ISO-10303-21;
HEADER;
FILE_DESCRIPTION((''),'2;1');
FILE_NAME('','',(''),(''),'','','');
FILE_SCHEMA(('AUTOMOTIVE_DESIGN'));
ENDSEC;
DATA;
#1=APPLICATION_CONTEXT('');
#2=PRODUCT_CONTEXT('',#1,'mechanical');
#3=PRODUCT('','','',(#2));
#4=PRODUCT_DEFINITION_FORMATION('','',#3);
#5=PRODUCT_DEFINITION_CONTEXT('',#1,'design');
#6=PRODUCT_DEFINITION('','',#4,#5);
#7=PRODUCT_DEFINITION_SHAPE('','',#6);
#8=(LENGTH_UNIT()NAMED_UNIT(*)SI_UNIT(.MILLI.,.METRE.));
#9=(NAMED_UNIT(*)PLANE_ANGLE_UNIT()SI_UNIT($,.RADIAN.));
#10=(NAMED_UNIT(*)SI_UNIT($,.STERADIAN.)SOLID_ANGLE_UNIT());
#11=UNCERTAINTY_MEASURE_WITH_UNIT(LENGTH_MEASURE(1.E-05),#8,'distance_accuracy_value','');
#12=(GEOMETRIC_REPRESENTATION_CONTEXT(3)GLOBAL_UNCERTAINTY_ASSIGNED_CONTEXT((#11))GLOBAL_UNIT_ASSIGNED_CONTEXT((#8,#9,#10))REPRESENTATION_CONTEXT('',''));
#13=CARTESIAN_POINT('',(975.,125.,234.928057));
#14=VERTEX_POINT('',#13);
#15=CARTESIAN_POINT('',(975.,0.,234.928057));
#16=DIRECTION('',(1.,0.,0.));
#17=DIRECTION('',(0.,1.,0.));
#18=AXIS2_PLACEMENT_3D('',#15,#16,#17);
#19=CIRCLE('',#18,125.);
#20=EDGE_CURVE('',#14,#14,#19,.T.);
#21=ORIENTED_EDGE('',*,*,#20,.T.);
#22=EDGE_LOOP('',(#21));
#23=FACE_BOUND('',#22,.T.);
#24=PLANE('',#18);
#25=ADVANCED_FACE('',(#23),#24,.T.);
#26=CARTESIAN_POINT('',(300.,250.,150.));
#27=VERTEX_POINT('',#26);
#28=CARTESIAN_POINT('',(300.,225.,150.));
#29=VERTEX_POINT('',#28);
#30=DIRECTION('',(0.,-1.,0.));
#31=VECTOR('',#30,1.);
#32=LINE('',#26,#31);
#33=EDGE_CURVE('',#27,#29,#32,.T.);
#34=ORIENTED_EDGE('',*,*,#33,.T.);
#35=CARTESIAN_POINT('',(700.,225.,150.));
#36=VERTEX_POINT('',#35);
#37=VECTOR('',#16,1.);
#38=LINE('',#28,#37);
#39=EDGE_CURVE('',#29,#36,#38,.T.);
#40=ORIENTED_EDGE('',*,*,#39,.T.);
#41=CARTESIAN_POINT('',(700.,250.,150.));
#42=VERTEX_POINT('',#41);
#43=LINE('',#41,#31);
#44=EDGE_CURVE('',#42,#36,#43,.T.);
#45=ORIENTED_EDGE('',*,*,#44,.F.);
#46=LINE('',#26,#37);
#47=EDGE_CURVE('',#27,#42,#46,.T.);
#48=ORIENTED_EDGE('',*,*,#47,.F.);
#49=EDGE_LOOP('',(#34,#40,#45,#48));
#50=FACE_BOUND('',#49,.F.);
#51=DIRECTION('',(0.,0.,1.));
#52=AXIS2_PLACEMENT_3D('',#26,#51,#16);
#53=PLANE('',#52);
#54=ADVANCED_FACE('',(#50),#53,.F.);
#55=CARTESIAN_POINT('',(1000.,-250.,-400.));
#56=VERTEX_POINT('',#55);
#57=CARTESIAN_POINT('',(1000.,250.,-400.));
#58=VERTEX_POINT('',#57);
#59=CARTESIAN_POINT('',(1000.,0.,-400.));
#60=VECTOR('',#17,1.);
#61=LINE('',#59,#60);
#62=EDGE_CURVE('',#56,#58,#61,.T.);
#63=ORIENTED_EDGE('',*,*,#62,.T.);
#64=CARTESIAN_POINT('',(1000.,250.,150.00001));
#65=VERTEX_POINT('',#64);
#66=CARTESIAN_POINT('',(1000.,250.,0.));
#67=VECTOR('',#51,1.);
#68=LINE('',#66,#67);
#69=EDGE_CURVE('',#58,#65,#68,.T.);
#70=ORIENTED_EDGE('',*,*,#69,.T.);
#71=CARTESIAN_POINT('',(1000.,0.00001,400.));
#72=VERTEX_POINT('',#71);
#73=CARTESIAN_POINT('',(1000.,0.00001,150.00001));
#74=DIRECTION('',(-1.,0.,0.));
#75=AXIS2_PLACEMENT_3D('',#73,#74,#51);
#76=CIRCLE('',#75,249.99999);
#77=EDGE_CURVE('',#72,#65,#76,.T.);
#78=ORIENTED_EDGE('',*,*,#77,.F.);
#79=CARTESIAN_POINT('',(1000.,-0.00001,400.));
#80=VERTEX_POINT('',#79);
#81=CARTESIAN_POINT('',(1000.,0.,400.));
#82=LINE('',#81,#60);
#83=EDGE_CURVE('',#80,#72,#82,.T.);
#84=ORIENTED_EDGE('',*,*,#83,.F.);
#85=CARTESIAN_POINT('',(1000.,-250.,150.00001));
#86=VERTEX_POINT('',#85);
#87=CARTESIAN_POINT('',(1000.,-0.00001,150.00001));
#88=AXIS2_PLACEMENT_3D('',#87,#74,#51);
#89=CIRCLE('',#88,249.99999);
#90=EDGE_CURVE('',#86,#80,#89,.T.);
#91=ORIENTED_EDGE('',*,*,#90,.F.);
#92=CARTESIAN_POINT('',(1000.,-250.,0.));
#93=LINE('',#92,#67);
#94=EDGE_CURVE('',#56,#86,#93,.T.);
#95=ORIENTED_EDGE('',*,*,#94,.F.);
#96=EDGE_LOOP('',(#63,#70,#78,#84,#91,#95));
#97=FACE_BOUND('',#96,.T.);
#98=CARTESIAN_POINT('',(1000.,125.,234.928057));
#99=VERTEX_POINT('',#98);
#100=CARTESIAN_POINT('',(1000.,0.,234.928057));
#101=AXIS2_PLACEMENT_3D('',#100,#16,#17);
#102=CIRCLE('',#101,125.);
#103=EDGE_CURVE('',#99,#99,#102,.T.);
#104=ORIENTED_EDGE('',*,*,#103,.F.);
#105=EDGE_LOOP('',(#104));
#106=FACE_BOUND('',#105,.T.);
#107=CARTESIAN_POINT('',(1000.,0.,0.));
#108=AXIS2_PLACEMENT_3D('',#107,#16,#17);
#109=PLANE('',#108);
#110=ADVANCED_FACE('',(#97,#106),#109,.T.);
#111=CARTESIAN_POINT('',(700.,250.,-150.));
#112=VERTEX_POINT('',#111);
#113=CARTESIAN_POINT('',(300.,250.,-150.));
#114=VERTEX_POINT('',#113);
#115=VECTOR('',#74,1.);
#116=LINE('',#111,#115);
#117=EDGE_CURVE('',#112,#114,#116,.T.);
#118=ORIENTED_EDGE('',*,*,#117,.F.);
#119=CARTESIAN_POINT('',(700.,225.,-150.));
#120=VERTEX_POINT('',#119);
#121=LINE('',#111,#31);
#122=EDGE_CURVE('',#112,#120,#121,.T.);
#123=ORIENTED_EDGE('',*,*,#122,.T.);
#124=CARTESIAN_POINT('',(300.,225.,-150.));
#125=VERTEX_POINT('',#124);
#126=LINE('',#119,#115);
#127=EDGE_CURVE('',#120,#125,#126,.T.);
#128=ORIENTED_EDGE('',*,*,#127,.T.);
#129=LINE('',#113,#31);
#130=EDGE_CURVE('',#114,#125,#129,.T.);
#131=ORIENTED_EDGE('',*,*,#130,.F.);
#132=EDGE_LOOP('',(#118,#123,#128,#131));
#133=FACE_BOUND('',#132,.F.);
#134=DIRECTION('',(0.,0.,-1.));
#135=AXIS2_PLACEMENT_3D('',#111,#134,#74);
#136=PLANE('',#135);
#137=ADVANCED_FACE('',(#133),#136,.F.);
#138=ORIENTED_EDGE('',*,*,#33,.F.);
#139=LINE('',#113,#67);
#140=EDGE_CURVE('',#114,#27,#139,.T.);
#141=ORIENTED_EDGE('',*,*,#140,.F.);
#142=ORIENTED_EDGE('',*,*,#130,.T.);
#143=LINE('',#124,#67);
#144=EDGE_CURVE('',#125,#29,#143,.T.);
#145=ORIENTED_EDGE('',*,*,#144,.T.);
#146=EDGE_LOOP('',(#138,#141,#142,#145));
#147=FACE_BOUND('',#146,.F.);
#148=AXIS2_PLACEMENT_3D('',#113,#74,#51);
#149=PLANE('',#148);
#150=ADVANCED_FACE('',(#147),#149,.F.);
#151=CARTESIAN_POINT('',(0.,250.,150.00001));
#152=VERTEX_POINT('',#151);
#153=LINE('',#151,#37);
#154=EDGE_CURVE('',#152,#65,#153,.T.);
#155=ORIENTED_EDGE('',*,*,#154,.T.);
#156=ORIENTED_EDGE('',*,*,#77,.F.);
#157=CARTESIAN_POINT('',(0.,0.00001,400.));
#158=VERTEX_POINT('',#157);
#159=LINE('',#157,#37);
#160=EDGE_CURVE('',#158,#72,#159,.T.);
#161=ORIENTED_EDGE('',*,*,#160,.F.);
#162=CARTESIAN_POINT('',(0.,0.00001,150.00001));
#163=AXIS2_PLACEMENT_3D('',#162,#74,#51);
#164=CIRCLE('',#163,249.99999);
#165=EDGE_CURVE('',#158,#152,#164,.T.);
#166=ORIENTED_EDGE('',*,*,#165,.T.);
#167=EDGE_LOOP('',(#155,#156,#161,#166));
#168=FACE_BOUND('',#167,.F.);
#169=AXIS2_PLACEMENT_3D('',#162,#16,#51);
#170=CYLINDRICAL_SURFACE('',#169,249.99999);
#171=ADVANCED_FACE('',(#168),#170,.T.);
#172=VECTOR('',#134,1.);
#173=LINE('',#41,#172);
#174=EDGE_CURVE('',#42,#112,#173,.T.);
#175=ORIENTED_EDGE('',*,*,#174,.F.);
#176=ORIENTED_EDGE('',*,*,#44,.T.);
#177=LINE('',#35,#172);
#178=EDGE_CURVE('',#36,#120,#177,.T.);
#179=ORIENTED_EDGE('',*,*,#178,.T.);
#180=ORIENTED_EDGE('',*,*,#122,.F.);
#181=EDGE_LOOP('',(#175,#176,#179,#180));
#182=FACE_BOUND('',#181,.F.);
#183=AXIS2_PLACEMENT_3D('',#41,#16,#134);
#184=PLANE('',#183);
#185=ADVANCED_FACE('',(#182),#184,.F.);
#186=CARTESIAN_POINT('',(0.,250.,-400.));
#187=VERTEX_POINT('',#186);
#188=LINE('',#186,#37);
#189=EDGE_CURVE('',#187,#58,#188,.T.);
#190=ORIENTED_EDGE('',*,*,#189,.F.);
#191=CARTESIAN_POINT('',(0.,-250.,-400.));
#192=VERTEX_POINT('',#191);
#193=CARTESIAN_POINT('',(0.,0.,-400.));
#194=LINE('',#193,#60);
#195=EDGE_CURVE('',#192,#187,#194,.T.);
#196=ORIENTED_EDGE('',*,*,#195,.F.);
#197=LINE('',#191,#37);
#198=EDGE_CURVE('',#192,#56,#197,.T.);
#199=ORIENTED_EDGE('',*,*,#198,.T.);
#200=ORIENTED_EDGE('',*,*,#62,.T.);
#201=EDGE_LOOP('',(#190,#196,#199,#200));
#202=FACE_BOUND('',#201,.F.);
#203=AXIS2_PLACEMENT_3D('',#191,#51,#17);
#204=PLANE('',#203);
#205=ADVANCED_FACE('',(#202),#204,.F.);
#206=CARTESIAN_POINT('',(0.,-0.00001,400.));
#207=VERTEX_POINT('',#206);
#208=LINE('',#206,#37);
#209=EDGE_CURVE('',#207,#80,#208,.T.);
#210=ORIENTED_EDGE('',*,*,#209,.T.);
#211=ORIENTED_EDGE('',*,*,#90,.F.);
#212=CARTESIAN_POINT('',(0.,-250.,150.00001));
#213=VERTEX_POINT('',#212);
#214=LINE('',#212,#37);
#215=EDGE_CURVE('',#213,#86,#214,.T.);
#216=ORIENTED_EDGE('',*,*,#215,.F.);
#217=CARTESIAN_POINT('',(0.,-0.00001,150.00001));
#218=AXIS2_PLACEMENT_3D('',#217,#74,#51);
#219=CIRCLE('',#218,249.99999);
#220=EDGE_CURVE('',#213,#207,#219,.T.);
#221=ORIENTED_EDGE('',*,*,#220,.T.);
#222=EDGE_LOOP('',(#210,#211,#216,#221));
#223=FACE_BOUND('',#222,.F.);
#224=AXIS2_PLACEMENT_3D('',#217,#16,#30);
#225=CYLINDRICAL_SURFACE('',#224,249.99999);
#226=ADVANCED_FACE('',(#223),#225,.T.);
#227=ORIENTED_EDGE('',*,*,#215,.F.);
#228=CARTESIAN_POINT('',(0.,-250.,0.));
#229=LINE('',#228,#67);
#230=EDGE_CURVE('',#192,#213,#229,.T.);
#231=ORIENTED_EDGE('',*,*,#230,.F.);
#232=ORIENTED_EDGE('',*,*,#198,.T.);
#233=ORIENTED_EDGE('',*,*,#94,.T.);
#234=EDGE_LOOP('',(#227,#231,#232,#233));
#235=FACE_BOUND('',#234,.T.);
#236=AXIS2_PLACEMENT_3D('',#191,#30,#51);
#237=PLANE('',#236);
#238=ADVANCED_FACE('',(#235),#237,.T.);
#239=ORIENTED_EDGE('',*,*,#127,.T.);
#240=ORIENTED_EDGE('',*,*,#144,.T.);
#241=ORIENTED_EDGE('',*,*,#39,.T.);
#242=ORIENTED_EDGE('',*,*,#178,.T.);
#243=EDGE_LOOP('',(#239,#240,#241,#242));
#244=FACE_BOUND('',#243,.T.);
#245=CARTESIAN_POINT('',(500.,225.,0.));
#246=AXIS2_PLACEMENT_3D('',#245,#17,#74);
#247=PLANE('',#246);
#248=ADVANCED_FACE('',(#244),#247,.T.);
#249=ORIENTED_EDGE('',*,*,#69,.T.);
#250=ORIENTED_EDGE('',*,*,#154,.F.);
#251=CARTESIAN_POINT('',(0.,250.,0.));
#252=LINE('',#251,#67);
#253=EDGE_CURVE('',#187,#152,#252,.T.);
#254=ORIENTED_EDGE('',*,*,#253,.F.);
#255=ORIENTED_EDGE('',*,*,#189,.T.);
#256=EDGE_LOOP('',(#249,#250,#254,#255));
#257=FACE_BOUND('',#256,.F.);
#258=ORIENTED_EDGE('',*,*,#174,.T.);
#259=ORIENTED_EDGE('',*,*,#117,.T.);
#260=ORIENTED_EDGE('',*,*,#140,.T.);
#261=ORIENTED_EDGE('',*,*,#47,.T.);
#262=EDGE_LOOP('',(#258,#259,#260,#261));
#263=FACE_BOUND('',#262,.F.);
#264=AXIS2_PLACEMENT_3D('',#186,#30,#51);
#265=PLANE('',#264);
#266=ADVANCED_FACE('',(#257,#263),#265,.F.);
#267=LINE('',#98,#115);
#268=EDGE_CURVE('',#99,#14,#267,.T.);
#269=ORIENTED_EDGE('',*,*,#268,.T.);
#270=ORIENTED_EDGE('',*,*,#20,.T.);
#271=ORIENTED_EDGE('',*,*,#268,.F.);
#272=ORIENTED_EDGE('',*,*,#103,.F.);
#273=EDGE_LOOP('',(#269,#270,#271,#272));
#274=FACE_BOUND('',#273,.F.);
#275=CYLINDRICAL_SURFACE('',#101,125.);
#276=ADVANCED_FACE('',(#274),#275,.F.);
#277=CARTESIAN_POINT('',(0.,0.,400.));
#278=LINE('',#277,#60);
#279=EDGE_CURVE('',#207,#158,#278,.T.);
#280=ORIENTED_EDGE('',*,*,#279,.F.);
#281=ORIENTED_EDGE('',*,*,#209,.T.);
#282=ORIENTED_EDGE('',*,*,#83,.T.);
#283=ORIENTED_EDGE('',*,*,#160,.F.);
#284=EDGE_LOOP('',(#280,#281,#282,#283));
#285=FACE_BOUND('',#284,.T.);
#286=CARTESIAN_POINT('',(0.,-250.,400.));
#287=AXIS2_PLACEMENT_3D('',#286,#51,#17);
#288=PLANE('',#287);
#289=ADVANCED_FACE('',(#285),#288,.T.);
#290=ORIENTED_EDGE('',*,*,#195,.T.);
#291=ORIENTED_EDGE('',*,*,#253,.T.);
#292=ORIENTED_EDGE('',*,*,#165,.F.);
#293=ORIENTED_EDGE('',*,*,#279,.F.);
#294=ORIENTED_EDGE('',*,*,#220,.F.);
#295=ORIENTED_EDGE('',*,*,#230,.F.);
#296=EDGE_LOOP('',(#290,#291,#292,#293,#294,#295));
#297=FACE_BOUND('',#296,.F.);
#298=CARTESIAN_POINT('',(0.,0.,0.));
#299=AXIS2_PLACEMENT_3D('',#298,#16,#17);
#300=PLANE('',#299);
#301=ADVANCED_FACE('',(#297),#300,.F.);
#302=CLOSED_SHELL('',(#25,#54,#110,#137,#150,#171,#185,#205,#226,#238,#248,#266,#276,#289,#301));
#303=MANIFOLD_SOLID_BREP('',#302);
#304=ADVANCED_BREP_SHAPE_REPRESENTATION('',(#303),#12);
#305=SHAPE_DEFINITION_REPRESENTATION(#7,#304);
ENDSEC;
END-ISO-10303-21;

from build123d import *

# Parameters (mm, degrees)
F0_W     = 500
F0_H     = 800
F1_DEPTH = 1000
F2_R     = 125
F3_DEPTH = 25
F4_R     = 249.99999
F6_DEPTH = 25
F7_W     = 600
F7_H     = 8.0311238766
F8_DEPTH = 100


# Not quite as in the source:
# - a fillet or chamfer is up to 0.001 mm smaller than in the source, because OpenCascade refuses the exact size


with BuildPart() as f1:
    # F0 (on Right) → F1 (new body)
    with BuildSketch(Plane.YZ):
        Rectangle(F0_W, F0_H)
    extrude(amount=F1_DEPTH)

    # F2 (on face) → F3 (cut)
    with BuildSketch(Plane.YZ.offset(1000)):
        with Locations((0, 234.9280565977)):
            Circle(F2_R)
    extrude(amount=-F3_DEPTH, mode=Mode.SUBTRACT)

    # F4 (radius 250 in the source; OpenCascade refuses exactly that, so slightly less here)
    f4_edges = [f1.edges().sort_by_distance(p)[0] for p in [
        (500, 250, 400),
        (500, -250, 400),
    ]]
    fillet(f4_edges, radius=F4_R)

    # F5 (on face) → F6 (cut)
    with BuildSketch(Plane(origin=(0, 250, 0), x_dir=(-1, 0, 0), z_dir=(0, 1, 0))):
        Polygon((-300, 150), (-700, 150), (-700, -14.3443720028), (-700, -150), (-300, -150), align=None)
    extrude(amount=-F6_DEPTH, mode=Mode.SUBTRACT)

    # F7 (on face) → F8 (cut)
    with BuildSketch(Plane(origin=(0, 250, 0), x_dir=(-1, 0, 0), z_dir=(0, 1, 0))):
        with Locations((-500, -404.0155619383)):
            Rectangle(F7_W, F7_H)
    extrude(amount=-F8_DEPTH, mode=Mode.SUBTRACT)


solid = f1.part
